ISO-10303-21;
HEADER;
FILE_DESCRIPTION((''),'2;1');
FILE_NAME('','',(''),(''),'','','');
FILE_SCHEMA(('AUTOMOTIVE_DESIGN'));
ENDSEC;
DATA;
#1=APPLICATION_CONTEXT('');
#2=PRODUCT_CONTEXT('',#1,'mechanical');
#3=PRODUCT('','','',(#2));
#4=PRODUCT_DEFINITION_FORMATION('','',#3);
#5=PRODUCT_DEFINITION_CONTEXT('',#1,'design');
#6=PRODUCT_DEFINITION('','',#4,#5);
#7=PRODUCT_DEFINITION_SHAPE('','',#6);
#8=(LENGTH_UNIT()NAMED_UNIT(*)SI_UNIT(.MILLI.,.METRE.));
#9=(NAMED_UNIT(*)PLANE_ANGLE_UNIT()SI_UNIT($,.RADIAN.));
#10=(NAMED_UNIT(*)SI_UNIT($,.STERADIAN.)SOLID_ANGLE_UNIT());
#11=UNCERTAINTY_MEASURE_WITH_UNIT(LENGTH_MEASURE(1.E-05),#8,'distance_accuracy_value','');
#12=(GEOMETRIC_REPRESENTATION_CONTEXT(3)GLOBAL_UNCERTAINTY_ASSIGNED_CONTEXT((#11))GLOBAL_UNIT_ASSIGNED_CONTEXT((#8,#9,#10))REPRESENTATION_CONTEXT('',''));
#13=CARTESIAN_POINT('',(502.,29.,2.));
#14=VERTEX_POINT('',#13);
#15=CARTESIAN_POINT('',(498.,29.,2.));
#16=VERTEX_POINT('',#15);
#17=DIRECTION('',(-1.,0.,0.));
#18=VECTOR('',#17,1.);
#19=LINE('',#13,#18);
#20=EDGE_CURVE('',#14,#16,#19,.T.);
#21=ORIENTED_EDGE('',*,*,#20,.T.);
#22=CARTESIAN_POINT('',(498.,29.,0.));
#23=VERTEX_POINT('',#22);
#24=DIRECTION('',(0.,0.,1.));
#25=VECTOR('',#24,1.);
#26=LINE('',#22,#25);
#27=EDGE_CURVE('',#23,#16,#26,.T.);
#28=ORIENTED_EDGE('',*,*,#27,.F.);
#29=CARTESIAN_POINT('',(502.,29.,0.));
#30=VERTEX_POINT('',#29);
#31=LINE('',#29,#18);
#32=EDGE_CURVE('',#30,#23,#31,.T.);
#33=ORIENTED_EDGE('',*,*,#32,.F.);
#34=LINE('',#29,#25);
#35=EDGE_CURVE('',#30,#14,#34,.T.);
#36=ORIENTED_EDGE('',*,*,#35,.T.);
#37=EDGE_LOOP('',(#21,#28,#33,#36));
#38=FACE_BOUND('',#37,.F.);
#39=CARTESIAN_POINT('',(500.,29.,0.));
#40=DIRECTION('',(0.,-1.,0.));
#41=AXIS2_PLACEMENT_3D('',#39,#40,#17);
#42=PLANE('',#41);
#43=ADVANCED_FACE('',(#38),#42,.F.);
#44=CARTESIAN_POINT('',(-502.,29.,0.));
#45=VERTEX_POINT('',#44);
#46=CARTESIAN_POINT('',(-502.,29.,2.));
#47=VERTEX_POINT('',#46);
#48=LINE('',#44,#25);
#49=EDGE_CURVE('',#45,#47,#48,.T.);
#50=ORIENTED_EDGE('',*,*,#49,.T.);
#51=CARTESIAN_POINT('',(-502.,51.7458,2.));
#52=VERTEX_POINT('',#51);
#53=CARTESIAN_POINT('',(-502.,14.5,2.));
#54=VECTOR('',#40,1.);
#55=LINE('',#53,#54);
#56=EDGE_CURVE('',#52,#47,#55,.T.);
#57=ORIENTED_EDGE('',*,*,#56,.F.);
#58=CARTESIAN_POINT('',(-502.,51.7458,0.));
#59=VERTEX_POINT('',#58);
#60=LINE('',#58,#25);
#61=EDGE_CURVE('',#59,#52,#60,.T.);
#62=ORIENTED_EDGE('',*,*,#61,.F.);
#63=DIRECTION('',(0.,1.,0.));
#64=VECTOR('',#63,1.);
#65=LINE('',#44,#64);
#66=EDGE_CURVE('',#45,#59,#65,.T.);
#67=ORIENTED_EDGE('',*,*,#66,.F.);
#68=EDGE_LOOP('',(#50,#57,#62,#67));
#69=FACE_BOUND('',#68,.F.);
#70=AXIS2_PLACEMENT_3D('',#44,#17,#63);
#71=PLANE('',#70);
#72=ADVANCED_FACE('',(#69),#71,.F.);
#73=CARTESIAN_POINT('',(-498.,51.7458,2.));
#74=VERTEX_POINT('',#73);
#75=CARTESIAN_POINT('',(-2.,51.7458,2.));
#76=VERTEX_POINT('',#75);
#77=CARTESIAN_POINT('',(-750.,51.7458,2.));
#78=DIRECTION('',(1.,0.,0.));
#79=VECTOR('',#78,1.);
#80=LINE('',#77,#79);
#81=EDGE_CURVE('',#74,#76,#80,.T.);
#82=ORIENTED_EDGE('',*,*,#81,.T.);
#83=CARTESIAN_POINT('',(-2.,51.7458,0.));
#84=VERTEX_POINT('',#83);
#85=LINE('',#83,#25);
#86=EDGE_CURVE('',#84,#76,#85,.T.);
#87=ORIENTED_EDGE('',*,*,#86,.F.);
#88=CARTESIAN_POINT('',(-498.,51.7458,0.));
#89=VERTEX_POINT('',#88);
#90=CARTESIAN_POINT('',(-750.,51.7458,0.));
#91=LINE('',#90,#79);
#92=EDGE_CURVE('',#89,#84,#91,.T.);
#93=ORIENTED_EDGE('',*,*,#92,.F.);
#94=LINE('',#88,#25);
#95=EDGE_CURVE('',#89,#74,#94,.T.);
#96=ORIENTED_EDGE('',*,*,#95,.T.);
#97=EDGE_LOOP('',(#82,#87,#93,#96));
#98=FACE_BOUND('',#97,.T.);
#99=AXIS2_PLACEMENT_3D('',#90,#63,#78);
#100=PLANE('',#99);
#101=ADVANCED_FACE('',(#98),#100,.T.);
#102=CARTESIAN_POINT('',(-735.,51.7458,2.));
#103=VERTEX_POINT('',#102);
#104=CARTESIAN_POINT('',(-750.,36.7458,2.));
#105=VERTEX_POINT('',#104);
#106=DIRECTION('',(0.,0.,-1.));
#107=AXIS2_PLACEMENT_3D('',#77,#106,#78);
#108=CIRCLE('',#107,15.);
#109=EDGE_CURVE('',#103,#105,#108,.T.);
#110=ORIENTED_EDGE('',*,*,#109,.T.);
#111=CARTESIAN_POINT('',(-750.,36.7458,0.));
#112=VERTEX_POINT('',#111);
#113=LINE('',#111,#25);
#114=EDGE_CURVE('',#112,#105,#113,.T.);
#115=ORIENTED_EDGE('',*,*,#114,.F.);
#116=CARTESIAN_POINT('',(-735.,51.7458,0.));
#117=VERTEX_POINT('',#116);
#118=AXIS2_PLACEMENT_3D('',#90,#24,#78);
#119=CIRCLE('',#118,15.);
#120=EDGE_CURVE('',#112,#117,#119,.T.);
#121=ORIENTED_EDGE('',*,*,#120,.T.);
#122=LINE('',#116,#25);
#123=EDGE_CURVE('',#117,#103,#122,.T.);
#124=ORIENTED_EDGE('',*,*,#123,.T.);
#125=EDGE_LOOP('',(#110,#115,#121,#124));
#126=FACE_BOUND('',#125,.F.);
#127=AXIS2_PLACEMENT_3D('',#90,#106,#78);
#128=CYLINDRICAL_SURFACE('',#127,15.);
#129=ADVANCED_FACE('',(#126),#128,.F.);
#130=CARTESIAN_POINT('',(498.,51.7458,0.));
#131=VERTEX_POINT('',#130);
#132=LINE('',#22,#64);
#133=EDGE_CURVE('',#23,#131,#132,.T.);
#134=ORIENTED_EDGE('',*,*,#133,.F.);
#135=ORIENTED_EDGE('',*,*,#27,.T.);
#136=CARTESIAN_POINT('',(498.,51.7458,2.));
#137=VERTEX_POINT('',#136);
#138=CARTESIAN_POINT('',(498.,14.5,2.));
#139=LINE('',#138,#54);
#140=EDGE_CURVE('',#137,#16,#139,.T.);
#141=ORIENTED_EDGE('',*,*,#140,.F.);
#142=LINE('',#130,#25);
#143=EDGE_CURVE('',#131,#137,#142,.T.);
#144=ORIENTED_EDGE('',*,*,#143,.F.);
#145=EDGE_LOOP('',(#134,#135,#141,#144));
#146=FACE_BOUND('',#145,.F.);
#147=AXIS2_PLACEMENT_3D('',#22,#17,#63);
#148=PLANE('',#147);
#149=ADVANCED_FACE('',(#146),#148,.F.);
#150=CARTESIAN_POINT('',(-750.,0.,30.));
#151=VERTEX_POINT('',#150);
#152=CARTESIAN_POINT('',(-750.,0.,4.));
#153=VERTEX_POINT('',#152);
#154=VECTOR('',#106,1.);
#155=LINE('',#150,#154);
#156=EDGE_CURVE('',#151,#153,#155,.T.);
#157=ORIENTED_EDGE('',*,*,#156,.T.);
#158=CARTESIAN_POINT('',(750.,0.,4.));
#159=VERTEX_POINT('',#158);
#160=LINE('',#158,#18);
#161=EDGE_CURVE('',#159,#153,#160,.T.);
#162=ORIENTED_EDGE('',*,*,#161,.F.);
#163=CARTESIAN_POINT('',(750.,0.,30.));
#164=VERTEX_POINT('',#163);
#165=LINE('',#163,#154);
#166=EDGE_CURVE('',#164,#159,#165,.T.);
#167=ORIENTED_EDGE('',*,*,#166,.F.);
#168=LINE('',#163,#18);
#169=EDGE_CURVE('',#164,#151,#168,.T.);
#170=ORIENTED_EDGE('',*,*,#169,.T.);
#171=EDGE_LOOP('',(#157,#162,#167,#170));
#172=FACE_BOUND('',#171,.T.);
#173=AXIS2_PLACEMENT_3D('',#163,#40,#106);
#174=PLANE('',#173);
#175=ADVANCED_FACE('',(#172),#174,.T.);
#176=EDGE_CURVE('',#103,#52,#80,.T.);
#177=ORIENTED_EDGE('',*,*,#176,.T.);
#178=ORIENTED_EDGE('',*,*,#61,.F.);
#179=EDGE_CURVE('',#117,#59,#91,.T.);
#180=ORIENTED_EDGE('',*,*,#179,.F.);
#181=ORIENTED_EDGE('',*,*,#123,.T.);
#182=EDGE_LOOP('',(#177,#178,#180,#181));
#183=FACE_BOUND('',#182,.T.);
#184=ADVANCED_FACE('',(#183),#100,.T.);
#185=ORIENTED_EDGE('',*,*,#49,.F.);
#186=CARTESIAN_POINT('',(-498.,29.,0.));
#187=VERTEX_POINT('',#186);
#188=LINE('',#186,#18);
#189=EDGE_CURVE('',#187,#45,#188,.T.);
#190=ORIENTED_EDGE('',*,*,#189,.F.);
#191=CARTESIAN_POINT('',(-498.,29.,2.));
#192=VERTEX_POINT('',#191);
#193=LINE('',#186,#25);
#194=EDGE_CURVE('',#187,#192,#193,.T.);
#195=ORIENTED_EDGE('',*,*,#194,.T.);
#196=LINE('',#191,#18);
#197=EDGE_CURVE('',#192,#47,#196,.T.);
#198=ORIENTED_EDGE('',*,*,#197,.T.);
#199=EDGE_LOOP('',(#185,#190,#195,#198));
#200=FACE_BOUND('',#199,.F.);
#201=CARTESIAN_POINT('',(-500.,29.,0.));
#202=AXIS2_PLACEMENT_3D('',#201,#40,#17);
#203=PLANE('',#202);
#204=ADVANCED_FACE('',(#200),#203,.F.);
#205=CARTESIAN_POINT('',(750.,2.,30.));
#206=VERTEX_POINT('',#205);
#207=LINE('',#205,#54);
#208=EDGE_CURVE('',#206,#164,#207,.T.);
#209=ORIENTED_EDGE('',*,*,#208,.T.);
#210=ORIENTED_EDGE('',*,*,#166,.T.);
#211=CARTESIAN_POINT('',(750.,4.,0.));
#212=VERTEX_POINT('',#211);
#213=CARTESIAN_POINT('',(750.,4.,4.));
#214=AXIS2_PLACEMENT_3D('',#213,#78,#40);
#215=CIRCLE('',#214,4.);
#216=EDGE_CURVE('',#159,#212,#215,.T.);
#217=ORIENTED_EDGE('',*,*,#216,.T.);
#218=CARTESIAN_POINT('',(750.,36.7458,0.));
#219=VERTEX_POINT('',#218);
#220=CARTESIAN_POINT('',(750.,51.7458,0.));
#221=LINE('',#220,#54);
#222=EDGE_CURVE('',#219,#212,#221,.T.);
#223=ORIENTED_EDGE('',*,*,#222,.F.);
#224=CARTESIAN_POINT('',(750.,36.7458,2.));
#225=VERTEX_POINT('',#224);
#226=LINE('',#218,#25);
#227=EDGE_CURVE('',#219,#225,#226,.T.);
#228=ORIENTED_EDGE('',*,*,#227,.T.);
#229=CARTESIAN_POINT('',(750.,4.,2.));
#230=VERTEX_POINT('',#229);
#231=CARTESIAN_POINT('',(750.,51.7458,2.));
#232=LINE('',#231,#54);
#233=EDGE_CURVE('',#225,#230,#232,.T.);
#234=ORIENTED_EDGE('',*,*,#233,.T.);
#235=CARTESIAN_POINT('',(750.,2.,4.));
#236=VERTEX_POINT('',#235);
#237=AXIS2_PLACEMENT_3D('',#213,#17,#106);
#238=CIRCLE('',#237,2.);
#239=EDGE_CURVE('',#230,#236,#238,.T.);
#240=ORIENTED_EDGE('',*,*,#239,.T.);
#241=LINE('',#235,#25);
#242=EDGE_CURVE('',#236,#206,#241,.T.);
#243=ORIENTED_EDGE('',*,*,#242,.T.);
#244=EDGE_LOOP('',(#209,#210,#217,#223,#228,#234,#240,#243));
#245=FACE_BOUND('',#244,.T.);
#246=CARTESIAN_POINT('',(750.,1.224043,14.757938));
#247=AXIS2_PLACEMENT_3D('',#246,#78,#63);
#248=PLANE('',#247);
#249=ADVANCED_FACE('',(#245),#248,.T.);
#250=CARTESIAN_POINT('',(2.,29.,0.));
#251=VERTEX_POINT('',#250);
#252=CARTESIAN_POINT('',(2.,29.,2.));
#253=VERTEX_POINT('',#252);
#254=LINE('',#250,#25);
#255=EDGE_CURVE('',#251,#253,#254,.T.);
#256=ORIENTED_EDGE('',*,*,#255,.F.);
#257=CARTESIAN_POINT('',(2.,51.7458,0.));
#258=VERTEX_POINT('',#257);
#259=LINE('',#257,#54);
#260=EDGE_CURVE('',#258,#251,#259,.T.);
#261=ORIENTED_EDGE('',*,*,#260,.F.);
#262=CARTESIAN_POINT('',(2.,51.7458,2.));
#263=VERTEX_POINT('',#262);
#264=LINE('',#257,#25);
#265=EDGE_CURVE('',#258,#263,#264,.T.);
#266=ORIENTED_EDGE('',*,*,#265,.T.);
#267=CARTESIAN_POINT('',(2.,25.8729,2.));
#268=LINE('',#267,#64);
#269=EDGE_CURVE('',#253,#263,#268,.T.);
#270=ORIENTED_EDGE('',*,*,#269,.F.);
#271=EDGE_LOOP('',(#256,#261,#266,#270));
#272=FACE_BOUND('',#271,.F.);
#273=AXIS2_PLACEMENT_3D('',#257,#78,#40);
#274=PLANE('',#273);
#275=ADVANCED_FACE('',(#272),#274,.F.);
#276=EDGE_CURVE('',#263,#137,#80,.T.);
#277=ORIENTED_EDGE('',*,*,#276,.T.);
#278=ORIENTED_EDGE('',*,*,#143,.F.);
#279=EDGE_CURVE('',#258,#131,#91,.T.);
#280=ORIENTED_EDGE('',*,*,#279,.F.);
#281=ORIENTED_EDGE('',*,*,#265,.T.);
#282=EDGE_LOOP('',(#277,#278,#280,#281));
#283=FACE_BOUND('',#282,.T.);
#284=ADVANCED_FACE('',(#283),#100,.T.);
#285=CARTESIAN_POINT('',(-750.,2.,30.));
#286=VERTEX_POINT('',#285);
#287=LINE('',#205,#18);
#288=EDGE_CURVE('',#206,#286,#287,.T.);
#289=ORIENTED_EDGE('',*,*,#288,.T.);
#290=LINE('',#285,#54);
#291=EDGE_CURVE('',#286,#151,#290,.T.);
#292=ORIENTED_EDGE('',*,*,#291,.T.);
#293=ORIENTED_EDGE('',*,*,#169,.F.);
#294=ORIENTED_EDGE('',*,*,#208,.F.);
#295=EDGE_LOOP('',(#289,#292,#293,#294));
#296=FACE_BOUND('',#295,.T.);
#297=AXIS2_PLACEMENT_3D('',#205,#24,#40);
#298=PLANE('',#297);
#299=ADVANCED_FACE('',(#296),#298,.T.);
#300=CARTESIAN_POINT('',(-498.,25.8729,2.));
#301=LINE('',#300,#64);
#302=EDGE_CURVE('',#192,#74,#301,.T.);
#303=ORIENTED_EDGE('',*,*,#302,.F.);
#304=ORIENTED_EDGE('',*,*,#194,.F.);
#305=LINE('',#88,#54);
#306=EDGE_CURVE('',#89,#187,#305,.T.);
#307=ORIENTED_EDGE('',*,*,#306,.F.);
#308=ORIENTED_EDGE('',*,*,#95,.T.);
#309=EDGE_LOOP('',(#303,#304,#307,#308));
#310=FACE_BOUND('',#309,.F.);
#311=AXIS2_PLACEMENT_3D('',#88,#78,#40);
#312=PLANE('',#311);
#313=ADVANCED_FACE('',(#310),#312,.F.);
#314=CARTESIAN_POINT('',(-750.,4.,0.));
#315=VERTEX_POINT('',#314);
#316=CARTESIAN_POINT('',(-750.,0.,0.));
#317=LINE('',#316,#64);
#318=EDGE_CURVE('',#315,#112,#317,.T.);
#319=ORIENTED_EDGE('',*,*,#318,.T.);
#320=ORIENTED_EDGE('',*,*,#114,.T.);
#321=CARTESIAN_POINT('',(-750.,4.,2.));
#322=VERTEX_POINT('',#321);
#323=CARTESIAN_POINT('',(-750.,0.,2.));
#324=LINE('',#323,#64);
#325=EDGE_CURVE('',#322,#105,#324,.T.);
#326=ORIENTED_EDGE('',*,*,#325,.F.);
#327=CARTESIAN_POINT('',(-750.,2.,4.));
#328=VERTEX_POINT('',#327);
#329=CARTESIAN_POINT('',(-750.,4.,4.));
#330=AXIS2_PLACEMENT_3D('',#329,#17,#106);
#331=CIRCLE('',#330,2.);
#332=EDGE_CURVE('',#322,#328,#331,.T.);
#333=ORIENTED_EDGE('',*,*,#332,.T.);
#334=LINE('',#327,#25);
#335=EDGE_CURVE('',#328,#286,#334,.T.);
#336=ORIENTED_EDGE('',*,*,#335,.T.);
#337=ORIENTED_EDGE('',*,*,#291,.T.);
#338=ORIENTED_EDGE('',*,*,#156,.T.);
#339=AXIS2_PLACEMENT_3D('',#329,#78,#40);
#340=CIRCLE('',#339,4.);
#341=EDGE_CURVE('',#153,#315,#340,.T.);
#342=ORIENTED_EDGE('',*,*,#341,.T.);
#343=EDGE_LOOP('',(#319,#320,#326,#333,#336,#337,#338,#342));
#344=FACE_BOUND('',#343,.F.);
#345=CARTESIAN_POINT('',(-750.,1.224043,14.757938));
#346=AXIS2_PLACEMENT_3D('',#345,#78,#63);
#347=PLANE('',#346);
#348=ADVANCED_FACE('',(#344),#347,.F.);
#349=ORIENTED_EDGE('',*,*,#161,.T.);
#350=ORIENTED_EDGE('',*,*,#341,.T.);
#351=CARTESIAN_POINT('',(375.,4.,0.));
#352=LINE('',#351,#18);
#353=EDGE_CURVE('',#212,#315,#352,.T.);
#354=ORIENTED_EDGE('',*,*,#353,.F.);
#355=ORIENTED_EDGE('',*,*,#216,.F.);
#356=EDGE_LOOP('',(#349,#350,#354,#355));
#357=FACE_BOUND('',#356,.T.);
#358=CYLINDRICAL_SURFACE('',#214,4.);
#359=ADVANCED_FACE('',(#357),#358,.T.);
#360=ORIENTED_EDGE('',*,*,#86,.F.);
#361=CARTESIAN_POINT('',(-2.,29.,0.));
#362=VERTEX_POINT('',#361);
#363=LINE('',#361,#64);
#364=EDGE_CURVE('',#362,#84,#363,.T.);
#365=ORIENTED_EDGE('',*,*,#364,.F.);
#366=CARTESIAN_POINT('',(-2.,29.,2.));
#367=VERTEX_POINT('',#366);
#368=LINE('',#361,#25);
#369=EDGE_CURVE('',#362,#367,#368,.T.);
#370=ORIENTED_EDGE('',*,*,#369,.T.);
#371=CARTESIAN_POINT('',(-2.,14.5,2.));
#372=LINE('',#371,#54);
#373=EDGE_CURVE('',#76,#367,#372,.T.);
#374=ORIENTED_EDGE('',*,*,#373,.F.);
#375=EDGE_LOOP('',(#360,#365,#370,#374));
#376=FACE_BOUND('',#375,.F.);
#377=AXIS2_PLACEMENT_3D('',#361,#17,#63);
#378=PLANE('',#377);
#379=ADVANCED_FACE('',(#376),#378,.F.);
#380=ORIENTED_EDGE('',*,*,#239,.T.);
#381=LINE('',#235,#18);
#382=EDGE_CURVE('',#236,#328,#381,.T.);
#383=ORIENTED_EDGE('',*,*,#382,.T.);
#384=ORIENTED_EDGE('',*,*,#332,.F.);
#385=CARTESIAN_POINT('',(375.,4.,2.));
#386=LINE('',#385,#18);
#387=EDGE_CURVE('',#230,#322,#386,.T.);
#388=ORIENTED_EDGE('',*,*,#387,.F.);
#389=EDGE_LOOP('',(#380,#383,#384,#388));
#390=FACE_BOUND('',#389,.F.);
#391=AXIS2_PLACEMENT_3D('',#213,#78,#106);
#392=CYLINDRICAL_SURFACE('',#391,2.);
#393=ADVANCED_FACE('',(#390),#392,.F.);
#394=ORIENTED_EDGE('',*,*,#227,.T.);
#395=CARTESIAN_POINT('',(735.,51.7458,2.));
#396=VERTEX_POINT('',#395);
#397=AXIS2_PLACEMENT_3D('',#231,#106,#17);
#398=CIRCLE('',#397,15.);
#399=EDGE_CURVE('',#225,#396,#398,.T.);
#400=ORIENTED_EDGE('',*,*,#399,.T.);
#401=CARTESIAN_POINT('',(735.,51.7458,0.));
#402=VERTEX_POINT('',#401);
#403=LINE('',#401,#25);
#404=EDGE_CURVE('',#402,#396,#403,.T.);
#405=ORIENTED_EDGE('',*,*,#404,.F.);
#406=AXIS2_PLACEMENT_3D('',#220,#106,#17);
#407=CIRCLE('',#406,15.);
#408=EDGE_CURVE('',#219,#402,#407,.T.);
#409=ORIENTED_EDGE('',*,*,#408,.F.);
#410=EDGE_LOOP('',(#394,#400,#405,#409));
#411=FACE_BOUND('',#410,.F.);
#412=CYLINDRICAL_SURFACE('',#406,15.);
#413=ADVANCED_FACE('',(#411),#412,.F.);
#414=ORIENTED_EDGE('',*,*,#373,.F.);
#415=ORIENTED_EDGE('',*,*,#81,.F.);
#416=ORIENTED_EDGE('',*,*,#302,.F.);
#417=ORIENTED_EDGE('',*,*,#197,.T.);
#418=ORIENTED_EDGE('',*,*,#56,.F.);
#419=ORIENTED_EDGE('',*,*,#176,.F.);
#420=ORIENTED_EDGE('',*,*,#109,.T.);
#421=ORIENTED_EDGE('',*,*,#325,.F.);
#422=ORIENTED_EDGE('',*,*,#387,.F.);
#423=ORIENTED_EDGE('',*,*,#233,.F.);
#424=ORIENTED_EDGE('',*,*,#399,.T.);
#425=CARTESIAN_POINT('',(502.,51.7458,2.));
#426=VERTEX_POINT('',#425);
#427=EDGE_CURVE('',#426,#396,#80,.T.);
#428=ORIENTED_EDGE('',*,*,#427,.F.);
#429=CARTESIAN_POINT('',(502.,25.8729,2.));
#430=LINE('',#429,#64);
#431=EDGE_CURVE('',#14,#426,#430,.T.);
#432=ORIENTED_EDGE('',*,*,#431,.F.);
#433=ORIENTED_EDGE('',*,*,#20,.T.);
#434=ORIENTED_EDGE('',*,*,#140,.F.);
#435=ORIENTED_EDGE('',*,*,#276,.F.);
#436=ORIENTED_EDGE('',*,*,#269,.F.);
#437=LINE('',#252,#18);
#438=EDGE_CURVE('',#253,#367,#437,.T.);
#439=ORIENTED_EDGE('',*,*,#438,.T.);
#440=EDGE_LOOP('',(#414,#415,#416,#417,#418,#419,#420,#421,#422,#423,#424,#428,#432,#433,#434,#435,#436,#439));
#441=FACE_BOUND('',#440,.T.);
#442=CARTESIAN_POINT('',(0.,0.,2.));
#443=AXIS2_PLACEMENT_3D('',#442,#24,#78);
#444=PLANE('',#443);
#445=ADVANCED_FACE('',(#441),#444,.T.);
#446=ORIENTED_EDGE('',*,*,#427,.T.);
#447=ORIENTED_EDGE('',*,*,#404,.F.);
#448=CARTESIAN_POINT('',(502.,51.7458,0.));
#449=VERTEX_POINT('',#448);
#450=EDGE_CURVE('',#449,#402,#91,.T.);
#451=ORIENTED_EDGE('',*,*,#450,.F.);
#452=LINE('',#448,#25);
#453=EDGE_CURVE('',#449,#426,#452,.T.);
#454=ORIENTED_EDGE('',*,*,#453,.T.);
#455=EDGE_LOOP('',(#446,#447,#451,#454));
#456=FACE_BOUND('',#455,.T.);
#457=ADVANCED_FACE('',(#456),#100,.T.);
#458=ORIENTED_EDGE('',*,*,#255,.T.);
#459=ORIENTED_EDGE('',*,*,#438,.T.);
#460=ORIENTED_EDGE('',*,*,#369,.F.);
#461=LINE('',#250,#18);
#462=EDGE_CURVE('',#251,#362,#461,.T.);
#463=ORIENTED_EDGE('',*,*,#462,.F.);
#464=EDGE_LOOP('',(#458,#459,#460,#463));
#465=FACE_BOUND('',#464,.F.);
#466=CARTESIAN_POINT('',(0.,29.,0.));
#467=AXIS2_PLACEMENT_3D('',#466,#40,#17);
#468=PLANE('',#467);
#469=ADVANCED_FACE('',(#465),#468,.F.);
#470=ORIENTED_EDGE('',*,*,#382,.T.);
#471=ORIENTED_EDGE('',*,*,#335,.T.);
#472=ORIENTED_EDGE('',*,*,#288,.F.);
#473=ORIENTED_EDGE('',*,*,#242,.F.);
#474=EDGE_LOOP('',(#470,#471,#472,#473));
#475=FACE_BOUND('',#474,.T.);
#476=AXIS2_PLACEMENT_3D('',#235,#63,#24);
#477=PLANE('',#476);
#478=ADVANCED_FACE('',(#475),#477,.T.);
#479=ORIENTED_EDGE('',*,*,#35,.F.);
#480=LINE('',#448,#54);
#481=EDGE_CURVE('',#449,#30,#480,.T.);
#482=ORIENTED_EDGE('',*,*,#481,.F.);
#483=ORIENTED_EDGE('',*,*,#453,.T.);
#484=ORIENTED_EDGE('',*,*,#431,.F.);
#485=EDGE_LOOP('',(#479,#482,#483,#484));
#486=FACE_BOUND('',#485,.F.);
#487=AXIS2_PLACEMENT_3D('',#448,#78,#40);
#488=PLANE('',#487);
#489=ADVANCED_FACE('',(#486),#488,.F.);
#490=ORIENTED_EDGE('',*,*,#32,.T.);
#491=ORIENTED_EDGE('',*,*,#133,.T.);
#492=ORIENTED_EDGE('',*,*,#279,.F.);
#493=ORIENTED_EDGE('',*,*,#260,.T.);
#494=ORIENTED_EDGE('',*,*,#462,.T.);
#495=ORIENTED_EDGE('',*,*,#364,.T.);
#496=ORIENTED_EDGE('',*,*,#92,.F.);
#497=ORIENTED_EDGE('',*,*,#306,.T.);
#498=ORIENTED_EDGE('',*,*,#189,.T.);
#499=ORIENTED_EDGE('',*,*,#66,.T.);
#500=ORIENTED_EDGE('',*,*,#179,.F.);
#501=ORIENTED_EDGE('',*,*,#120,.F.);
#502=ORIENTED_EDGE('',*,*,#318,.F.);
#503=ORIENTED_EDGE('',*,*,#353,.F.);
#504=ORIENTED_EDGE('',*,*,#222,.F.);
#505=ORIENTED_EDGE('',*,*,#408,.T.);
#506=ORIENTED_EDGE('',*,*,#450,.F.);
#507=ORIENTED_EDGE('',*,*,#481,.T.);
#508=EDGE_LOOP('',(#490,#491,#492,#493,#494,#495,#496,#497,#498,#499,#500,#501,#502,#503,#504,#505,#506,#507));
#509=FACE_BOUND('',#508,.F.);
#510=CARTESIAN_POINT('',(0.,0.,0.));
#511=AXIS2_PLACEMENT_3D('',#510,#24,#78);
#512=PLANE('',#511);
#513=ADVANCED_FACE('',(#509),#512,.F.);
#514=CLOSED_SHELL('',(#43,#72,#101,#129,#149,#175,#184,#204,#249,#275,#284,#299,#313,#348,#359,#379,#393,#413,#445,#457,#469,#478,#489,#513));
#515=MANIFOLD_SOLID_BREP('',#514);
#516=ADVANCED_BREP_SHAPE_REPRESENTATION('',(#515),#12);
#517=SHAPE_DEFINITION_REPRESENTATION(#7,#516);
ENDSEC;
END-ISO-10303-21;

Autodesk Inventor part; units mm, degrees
ref_plane "YZ Plane" through (0, 0, 0) normal (1, 0, 0) x (0, 1, 0)
ref_plane "XZ Plane" through (0, 0, 0) normal (0, 1, 0) x (-1, 0, 0)
ref_plane "XY Plane" through (0, 0, 0) normal (0, 0, 1) x (1, 0, 0)
sketch "Sketch1" plane through (0, 0, 0) normal (0, 0, 1) x (1, 0, 0)
  line L0 (-750, 51.7458) -> (750, 51.7458)
  line L1 (750, 51.7458) -> (750, 0)
  line L2 (750, 0) -> (-750, 0)
  line L3 (-750, 0) -> (-750, 51.7458)
  point P0 (0, 0)
  point P1 (0, 0)
  dimension "d0" = 1500
  dimension "d1" = 51.7458
extrude "Plate1" add sketch "Sketch1" along normal blind 2
sketch "Sketch2" plane through (750, 2, 0) normal (0, -1, 0) x (1, 0, 0)
  line L0 (-1500, 0) -> (0, 0)
  line L1 (0, 0) -> (0, 30)
  line L2 (0, 30) -> (-1500, 30)
  line L3 (-1500, 30) -> (-1500, 0)
edge flange "Flange1" height 30 angle 90 thickness 2 bend radius 2 thickness toward (0, -1, 0) relief tear relief width 2 relief depth 1 edges at (0, 0, 2) wall of the first edge with corners at (-750, 2, 0) (750, 2, 0) (750, 2, 30) (-750, 2, 30)
bend "Bend1"
corner "Corner1"
sketch "Sketch5" plane through (0, 0, 0) normal (0, 0, -1) x (-1, 0, 0)
  line L0 (750, 51.7458) -> (-750, 51.7458) projected
  line L1 (498, 51.7458) -> (498, 29)
  line L2 (498, 29) -> (500, 29)
  line L3 (500, 29) -> (500, 51.7458) construction
  line L4 (750, 0) -> (-750, 0) projected
  line L5 (500, 29) -> (502, 29)
  line L6 (502, 29) -> (502, 51.7458)
  point P0 (0, 0)
  dimension "d18" = 2
  dimension "d19" = 250
  dimension "d20" = 29
  dimension "d27" = 2
extrude "Extrusion1" cut sketch "Sketch5" against normal through all
pattern_linear "Rectangular Pattern1" count 3 spacing 500 along (1, 0, 0) of "Extrusion1"
sketch "Sketch6" plane through (0, 0, 0) normal (0, 0, -1) x (-1, 0, 0)
  line L0 (-750, 51.7458) -> (-750, 4) projected
  circle A0 centre (-750, 51.7458) radius 15
  line L1 (-750, 51.7458) -> (750, 51.7458) projected
  point P0 (0, 0)
  point P1 (-502, 51.7458)
  point P2 (-735, 51.7458)
  point P3 (-750, 36.7458)
  dimension "d24" = 30
extrude "Extrusion2" cut sketch "Sketch6" against normal through all contours L1 A0 L0 picked at (-740.1254, 50.6332)
mirror "Mirror1" about plane through (0, 0, 0) normal (1, 0, 0) of "Extrusion2"
equation "\"d1\" = Стрингер_1"
equation "\"d18\" = Thickness"
equation "\"d27\" = d18"
equation "\"d2\" = Thickness"
equation "\"d3\" = BendReliefWidth"
equation "\"d4\" = BendReliefDepth"
equation "\"d5\" = MinimumRemnant"
equation "\"d6\" = TransitionRadius"
equation "\"d9\" = BendRadius"
equation "\"d10\" = CornerReliefSize"
equation "\"d11\" = GapSize"
equation "\"d12\" = JacobiRadiusSize"
equation "\"BendRadius\" = Thickness"
equation "\"BendReliefWidth\" = Thickness"
equation "\"BendReliefDepth\" = 0.5 * Thickness"
equation "\"CornerReliefSize\" = 4 * Thickness"
equation "\"MinimumRemnant\" = 2 * Thickness"
equation "\"TransitionRadius\" = BendRadius"
equation "\"JacobiRadiusSize\" = BendRadius"
equation "\"GapSize\" = Thickness"
equation "\"qqqqqq\" = 67.35706"
equation "\"Стрингер_1\" = 51.745837"
equation "\"Thickness\" = 2"
properties part number "МОО 051 стрингер спина 12" material "Stainless Steel"
